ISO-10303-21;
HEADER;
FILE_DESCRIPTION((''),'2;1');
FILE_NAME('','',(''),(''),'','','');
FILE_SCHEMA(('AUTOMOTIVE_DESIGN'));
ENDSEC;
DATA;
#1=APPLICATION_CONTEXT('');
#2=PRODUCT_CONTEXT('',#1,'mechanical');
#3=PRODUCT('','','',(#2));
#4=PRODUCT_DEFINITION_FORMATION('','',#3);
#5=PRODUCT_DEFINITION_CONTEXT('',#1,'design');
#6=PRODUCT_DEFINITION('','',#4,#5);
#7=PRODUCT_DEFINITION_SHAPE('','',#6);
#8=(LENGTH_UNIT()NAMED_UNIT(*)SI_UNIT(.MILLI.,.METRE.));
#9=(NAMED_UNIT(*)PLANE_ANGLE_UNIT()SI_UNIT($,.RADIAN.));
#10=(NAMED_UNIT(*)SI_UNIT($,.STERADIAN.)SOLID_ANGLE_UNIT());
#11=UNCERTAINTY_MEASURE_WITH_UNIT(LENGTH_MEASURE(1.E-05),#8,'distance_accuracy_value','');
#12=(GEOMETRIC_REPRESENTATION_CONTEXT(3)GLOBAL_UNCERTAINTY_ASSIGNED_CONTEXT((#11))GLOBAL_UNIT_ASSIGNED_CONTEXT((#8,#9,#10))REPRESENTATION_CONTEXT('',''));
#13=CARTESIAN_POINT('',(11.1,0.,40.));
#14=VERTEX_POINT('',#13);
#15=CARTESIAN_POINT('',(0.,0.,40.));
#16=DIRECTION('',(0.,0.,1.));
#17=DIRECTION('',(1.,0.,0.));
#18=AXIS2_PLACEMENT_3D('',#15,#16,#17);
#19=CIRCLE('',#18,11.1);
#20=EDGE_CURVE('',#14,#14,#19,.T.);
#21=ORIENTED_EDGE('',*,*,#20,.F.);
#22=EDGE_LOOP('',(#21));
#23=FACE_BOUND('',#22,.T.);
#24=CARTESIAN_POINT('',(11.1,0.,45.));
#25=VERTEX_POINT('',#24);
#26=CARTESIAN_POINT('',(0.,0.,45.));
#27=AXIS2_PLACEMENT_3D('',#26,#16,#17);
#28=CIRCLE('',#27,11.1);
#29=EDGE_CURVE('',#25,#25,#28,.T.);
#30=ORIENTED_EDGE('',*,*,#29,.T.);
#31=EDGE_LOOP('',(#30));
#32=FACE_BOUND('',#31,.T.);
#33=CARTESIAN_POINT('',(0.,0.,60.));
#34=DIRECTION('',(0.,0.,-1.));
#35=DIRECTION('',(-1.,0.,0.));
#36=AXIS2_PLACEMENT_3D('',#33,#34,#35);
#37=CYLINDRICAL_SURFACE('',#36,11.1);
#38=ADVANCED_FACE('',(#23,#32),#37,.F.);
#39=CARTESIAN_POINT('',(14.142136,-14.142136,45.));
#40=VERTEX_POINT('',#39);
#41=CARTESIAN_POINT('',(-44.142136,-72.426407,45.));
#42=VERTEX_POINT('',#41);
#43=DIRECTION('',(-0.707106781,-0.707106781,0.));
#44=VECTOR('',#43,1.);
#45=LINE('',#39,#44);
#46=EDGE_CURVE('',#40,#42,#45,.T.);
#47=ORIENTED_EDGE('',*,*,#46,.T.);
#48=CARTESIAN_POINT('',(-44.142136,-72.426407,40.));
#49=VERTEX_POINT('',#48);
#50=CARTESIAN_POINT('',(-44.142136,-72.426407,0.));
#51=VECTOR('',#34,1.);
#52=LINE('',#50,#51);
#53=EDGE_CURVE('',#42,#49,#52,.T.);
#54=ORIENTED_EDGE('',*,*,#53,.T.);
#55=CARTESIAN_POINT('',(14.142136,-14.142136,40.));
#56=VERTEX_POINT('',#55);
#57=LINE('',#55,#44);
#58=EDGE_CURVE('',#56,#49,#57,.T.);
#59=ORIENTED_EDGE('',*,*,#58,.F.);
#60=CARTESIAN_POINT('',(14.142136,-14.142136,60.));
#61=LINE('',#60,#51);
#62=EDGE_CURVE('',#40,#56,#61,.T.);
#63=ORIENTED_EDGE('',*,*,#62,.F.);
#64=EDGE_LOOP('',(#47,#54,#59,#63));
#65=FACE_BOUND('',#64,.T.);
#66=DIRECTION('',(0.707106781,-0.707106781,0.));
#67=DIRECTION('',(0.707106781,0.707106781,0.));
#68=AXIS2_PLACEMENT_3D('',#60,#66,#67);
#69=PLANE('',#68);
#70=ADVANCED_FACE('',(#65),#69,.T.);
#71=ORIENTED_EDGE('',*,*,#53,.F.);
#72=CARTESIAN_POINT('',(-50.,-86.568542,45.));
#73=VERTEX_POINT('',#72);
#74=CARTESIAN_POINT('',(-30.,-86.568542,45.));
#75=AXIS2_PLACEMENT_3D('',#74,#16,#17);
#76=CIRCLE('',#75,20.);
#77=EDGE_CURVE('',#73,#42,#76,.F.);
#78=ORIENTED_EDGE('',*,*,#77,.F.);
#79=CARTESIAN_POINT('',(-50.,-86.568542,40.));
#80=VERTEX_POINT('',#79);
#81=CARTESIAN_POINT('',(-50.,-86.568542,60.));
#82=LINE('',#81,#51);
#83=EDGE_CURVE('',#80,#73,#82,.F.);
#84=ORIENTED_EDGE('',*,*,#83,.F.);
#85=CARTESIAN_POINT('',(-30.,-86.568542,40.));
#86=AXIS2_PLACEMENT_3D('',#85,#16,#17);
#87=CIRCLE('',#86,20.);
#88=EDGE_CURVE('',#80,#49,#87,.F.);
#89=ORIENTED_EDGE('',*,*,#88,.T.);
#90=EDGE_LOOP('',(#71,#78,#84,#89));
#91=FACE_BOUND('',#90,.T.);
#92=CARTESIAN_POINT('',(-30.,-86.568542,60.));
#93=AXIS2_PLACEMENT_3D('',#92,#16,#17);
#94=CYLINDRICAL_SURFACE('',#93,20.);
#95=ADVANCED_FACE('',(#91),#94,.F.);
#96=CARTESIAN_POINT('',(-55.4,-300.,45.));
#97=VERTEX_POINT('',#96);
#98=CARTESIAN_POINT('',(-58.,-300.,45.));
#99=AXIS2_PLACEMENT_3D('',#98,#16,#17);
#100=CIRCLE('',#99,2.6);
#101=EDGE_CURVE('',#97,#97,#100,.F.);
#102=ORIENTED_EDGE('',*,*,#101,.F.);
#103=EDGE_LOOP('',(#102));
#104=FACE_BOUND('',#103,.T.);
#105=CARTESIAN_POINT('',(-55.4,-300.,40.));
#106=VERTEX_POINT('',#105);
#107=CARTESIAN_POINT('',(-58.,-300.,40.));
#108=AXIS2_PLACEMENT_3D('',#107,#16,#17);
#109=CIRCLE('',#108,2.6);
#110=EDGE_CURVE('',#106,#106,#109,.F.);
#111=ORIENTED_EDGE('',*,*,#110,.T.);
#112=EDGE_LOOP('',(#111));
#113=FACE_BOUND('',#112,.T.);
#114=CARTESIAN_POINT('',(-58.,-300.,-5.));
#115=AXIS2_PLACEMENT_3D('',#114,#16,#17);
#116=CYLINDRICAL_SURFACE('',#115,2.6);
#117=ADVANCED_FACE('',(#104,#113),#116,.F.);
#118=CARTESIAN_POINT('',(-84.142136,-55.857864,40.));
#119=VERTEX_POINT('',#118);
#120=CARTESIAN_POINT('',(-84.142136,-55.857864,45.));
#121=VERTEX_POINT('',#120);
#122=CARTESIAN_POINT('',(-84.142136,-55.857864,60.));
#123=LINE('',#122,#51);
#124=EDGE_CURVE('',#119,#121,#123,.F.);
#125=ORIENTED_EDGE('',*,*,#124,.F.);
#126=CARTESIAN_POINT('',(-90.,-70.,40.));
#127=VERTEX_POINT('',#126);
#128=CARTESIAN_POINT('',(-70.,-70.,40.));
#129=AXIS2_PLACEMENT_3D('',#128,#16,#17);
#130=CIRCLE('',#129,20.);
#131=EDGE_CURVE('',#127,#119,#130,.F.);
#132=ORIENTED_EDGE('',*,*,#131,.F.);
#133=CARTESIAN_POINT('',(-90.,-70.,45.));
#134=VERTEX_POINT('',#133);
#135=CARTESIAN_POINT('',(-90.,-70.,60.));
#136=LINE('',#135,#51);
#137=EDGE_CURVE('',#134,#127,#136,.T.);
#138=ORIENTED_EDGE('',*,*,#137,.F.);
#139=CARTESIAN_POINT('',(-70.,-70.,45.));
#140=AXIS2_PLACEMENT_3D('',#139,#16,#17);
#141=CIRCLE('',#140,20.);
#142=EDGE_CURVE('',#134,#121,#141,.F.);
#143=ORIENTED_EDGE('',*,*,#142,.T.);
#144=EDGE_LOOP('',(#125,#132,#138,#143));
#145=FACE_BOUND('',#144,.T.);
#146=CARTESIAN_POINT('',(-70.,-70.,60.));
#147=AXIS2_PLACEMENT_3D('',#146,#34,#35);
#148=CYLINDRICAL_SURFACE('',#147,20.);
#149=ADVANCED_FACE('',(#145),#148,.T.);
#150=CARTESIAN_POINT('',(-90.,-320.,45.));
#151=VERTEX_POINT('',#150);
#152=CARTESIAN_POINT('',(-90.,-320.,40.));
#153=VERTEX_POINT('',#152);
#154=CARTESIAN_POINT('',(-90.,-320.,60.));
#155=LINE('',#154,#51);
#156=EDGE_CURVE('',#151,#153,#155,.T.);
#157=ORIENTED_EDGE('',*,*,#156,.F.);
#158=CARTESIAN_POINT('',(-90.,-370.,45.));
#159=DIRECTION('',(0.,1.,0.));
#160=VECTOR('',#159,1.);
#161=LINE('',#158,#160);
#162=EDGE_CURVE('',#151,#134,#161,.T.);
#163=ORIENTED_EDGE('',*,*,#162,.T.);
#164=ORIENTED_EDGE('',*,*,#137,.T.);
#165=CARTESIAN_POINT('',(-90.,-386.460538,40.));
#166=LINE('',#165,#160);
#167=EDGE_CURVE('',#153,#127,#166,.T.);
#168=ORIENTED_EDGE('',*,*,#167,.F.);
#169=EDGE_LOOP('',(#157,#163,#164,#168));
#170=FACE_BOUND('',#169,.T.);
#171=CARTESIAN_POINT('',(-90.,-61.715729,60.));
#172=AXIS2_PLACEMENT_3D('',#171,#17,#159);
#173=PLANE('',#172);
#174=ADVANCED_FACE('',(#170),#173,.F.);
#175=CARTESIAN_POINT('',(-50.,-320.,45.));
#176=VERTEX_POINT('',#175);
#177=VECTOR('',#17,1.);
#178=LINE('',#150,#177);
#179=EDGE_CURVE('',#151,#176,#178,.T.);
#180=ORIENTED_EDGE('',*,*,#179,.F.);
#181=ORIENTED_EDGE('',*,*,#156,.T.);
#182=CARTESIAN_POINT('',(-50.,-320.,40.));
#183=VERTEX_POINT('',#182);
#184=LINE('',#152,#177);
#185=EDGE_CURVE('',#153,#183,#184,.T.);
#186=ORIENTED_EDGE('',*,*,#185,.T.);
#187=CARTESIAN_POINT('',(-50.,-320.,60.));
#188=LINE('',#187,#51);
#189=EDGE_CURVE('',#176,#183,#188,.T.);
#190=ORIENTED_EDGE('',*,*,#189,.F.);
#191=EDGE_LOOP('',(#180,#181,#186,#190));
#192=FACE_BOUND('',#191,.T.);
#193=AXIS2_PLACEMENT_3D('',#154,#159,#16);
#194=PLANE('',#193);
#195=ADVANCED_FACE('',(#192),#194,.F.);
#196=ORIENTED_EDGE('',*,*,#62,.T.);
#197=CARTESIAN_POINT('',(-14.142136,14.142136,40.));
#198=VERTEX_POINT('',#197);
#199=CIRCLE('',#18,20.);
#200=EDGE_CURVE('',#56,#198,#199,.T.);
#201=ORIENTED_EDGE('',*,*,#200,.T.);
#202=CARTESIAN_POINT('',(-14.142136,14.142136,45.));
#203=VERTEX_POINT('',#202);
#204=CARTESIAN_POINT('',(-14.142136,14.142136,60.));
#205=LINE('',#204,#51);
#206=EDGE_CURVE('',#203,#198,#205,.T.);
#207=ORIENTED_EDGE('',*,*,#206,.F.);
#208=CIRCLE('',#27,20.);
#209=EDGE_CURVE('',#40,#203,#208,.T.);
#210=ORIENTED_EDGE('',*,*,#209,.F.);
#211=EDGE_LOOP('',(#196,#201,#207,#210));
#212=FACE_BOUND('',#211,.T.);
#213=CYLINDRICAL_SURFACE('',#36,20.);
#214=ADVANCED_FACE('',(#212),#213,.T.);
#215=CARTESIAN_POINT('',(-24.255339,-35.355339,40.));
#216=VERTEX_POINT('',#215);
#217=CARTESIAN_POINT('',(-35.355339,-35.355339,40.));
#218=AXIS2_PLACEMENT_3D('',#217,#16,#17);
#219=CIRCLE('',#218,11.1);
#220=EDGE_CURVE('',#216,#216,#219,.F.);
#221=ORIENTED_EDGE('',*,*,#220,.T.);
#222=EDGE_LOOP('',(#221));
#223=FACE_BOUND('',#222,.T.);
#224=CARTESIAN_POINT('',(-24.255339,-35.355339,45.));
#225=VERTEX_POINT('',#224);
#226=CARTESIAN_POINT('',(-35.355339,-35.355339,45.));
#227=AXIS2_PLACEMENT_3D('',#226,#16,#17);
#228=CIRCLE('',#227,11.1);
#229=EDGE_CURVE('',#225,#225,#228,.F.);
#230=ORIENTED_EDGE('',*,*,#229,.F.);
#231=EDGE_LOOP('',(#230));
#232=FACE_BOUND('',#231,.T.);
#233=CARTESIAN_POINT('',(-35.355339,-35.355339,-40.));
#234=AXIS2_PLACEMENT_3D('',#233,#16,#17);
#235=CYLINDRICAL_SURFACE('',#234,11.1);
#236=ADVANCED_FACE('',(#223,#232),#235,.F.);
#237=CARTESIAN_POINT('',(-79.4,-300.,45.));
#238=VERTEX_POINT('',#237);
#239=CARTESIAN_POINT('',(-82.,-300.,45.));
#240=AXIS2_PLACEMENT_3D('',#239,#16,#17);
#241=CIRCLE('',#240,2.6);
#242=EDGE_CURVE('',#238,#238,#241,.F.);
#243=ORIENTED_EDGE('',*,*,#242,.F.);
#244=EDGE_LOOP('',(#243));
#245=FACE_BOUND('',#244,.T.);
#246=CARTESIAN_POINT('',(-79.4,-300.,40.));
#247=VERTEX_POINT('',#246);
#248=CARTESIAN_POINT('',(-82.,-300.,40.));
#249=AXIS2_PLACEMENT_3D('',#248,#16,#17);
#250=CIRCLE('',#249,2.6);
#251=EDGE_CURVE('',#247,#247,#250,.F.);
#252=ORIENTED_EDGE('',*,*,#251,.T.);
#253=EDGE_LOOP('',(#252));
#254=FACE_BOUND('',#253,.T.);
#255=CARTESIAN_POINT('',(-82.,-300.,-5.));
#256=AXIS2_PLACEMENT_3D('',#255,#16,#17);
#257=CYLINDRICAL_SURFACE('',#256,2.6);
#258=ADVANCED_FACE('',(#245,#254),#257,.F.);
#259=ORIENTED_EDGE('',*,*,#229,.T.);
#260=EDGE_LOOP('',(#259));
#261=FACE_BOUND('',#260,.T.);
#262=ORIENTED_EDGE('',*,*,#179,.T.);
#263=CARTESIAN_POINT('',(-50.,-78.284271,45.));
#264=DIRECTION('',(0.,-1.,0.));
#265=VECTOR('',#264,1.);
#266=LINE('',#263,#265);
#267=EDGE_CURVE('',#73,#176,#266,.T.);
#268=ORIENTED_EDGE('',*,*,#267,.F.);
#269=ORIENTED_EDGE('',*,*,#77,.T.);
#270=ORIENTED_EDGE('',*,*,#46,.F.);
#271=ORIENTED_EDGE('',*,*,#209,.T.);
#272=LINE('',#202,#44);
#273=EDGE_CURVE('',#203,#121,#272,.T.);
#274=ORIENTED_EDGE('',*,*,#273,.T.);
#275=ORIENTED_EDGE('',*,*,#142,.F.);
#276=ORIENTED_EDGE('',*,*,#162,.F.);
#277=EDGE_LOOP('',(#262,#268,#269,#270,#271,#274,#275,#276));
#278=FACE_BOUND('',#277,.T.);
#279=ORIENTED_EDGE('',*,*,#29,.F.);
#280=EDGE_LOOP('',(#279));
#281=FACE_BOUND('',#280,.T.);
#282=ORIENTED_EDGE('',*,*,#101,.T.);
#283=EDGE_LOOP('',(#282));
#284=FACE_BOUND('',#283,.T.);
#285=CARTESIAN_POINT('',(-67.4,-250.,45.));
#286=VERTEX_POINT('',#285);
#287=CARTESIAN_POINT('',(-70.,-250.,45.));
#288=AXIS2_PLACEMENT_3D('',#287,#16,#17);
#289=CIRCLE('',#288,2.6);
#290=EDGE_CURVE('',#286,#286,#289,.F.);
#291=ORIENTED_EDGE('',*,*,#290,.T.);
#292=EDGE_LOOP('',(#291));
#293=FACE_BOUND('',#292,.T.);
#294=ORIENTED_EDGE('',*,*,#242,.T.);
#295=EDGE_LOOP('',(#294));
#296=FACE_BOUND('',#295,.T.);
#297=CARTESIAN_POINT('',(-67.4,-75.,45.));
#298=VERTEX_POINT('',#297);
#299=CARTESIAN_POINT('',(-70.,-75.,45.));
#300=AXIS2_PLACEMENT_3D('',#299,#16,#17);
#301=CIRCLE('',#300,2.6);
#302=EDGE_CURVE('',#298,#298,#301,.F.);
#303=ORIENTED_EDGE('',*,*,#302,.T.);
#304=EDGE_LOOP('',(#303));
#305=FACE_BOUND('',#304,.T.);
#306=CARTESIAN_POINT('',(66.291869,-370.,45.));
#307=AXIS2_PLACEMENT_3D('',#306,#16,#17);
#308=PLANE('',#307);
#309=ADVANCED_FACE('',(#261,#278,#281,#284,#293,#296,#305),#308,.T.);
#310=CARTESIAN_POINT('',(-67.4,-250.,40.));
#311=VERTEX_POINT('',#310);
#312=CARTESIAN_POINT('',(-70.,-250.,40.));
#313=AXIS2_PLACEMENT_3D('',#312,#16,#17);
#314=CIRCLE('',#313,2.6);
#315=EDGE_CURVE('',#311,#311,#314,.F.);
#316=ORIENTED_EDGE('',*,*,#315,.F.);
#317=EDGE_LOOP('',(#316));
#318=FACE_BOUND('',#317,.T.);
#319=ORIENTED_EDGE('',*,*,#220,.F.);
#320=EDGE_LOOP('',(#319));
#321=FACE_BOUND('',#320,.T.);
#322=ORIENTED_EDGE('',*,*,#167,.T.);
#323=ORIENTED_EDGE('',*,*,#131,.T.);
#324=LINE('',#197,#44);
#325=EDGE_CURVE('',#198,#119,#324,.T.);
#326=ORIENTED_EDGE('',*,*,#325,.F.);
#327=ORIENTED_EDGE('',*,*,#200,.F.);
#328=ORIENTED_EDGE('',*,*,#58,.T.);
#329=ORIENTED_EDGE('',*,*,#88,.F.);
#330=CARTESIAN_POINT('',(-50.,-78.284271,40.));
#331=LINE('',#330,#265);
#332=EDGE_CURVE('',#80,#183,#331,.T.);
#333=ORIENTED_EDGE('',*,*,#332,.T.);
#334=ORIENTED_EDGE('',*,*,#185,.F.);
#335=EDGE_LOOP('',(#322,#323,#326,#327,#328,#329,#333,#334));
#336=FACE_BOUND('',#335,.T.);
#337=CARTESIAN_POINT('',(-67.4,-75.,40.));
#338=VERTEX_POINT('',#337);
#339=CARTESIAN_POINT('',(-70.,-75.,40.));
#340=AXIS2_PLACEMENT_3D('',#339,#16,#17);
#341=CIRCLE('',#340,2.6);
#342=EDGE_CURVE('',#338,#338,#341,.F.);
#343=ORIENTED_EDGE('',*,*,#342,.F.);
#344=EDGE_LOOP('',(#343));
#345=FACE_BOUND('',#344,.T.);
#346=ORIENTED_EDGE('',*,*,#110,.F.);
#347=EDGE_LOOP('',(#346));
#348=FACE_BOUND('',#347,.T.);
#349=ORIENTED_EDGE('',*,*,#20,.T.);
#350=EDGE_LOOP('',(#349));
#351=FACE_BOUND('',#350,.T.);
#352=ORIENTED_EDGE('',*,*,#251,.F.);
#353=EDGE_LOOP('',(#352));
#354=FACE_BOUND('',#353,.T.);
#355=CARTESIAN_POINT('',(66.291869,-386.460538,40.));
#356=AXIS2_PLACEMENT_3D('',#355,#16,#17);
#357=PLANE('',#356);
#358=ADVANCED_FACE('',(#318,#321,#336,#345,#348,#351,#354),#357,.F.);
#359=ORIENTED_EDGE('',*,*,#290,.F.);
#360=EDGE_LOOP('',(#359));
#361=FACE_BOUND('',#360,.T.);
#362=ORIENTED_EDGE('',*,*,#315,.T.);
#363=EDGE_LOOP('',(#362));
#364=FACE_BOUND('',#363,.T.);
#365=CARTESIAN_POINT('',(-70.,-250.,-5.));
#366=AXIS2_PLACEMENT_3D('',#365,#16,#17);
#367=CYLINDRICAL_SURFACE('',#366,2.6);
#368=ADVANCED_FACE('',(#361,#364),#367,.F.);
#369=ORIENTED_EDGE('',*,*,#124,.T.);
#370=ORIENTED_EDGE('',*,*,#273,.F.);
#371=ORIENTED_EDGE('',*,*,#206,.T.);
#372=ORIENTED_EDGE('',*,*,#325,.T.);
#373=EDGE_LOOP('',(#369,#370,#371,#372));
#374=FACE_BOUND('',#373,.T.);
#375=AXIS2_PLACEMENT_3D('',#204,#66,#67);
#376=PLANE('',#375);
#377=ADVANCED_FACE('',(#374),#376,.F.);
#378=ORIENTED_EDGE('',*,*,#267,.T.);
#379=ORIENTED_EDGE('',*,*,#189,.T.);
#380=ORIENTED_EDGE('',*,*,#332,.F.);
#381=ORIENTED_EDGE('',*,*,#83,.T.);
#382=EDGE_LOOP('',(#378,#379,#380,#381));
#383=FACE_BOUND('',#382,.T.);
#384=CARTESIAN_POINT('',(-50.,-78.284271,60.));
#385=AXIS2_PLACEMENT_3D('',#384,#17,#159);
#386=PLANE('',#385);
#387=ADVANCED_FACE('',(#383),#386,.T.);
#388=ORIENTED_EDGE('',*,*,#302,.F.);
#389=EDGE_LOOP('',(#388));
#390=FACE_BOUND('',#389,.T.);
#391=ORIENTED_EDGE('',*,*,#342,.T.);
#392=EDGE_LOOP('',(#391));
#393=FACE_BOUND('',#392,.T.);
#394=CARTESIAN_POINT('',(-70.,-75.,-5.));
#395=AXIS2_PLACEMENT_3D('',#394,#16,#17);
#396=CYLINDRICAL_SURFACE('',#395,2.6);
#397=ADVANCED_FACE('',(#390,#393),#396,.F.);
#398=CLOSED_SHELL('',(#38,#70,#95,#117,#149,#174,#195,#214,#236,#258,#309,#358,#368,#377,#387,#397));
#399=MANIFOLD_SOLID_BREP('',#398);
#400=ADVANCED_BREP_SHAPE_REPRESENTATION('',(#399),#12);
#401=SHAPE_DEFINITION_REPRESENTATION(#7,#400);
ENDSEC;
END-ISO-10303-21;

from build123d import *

# Parameters (mm, degrees)
SKETCH_1_R                = 20
SKETCH_1_R_2              = 11.1
EXTRUDE_1_DEPTH           = 60
EXTRUDE_2_DEPTH           = 30
SKETCH_4_R                = 11
EXTRUDE_3_DEPTH           = 5
SKETCH_8_R                = 11.1
CUT_EXTRUDE_1_DEPTH       = 100
FILLET_4_R                = 20
EXTRUDE_START             = -30
SKETCH_18_R               = 35
EXTRUDE_4_DEPTH           = 5
EXTRUDE_START_2           = -25
SKETCH_19_R               = 35
EXTRUDE_5_DEPTH           = 5
FILLET_5_R                = 10
CUT_EXTRUDE_9_DEPTH       = 388.169213652
CUT_EXTRUDE_9_DEPTH_BACK  = 388.169213652
SKETCH_21_R               = 2.6
CUT_EXTRUDE_10_DEPTH      = 407.881000043
CUT_EXTRUDE_10_DEPTH_BACK = 407.881000043
SKETCH_22_W               = 45
SKETCH_22_H               = 451.378457943
SKETCH_22_W_2             = 20
SKETCH_22_H_2             = 431.087956996


with BuildPart() as part:
    # 草图1 → 凸台-拉伸1 (new body)
    with BuildSketch(Plane.XY):
        Circle(SKETCH_1_R)
        Circle(SKETCH_1_R_2, mode=Mode.SUBTRACT)
    extrude(amount=EXTRUDE_1_DEPTH)

    # 草图2 → 凸台-拉伸2 (add, symmetric)
    with BuildSketch(Plane.XY.offset(30)):
        with BuildLine():
            Line((-14.142135624, 14.142135624), (-90, -61.715728753))
            Line((-90, -61.715728753), (-90, -320))
            Line((-90, -320), (-50, -320))
            Line((-50, -320), (-50, -78.284271247))
            Line((-50, -78.284271247), (14.142135624, -14.142135624))
            ThreePointArc((14.142135624, -14.142135624), (-14.142135624, -14.142135624), (-14.142135624, 14.142135624))
        make_face()
    extrude(amount=EXTRUDE_2_DEPTH, both=True)

    # 草图4 → 凸台-拉伸3 (add)
    with BuildSketch(Plane.XY.offset(60)):
        with BuildLine():
            Line((-90, -290), (-50, -290))
            Line((-50, -290), (-50, -350))
            ThreePointArc((-50, -350), (-70, -370), (-90, -350))
            Line((-90, -350), (-90, -290))
        make_face()
        with Locations((-70, -350)):
            Circle(SKETCH_4_R, mode=Mode.SUBTRACT)
    extrude_3 = extrude(amount=EXTRUDE_3_DEPTH)

    # 镜向1: 凸台-拉伸3 across plane
    add(extrude_3.mirror(Plane.XY.offset(30)))

    # 草图8 → 切除-拉伸1 (cut)
    with BuildSketch(Plane.XY.offset(60)):
        with Locations((-35.355339059, -35.355339059)):
            Circle(SKETCH_8_R)
    extrude(amount=-CUT_EXTRUDE_1_DEPTH, mode=Mode.SUBTRACT)

    # 圆角4
    fillet_4_edges = [part.edges().sort_by_distance(p)[0] for p in [
        (-50, -78.284271247, 30),
        (-90, -61.715728753, 30),
    ]]
    fillet(fillet_4_edges, radius=FILLET_4_R)

    # 草图18 → 凸台-拉伸4 (add)
    with BuildSketch(Plane.XY.offset(60).offset(EXTRUDE_START)):
        with BuildLine():
            ThreePointArc((15.487252676, -12.654841151), (14.833346688, -13.415357842), (14.142135624, -14.142135624))
            Line((14.142135624, -14.142135624), (-44.142135624, -72.426406871))
            ThreePointArc((-44.142135624, -72.426406871), (-48.47759065, -78.914873848), (-50, -86.568542495))
            Line((-50, -86.568542495), (-50, -128.513280962))
            Line((-50, -128.513280962), (20.291868618, -128.513280962))
            ThreePointArc((20.291868618, -128.513280962), (62.790327113, -100.116718851), (52.818780552, -49.986369028))
            Line((52.818780552, -49.986369028), (15.487252676, -12.654841151))
        make_face()
        with Locations((20.291868618, -82.513280962)):
            Circle(SKETCH_18_R, mode=Mode.SUBTRACT)
    extrude(amount=EXTRUDE_4_DEPTH)

    # 草图19 → 凸台-拉伸5 (add)
    with BuildSketch(Plane(origin=(0, 0, 0), x_dir=(-1, 0, 0), z_dir=(0, 0, -1)).offset(EXTRUDE_START_2)):
        with BuildLine():
            Line((50, -134.571348531), (50, -226.571348531))
            Line((50, -226.571348531), (-0.680255104, -226.571348531))
            ThreePointArc((-0.680255104, -226.571348531), (-46.680255104, -180.571348531), (-0.680255104, -134.571348531))
            Line((-0.680255104, -134.571348531), (50, -134.571348531))
        make_face()
        with Locations((-0.680255104, -180.571348531)):
            Circle(SKETCH_19_R, mode=Mode.SUBTRACT)
    extrude(amount=-EXTRUDE_5_DEPTH)

    # 圆角5
    # the kernel refuses this fillet: 10 mm, written as the material it adds along each edge
    with BuildSketch(Plane(origin=(-50, -226.571348531, 25), x_dir=(0, -1, 0), z_dir=(0, 0, 1)), Plane(origin=(-50, -128.513280962, 30), x_dir=(0, -1, 0), z_dir=(0, 0, 1))) as fillet_5_piece_1:
        with BuildLine():
            CenterArc((FILLET_5_R, FILLET_5_R), FILLET_5_R, 180, 90)
            Line((0, FILLET_5_R), (0, 0))
            Line((0, 0), (FILLET_5_R, 0))
        make_face()
    extrude(amount=5)

    # 草图21 → 切除-拉伸9 (cut, two sides: drawn at the far end of the back side and taken through both)
    with BuildSketch(Plane.XY.offset(65).offset(-CUT_EXTRUDE_9_DEPTH_BACK)):
        with Locations((-70, -75)):
            Circle(SKETCH_21_R)
        with Locations((-70, -250)):
            Circle(SKETCH_21_R)
        with Locations((-58, -300)):
            Circle(SKETCH_21_R)
        with Locations((-82, -300)):
            Circle(SKETCH_21_R)
    extrude(amount=CUT_EXTRUDE_9_DEPTH + CUT_EXTRUDE_9_DEPTH_BACK, mode=Mode.SUBTRACT)

    # 草图22 → 切除-拉伸10 (cut, two sides: drawn at the far end of the back side and taken through both)
    with BuildSketch(Plane.ZY.offset(90).offset(-CUT_EXTRUDE_10_DEPTH_BACK)):
        with Locations((17.5, -160.771309387)):
            Rectangle(SKETCH_22_W, SKETCH_22_H)
        with Locations((55, -154.456021502)):
            Rectangle(SKETCH_22_W_2, SKETCH_22_H_2)
    extrude(amount=CUT_EXTRUDE_10_DEPTH + CUT_EXTRUDE_10_DEPTH_BACK, mode=Mode.SUBTRACT)


solid = part.part
